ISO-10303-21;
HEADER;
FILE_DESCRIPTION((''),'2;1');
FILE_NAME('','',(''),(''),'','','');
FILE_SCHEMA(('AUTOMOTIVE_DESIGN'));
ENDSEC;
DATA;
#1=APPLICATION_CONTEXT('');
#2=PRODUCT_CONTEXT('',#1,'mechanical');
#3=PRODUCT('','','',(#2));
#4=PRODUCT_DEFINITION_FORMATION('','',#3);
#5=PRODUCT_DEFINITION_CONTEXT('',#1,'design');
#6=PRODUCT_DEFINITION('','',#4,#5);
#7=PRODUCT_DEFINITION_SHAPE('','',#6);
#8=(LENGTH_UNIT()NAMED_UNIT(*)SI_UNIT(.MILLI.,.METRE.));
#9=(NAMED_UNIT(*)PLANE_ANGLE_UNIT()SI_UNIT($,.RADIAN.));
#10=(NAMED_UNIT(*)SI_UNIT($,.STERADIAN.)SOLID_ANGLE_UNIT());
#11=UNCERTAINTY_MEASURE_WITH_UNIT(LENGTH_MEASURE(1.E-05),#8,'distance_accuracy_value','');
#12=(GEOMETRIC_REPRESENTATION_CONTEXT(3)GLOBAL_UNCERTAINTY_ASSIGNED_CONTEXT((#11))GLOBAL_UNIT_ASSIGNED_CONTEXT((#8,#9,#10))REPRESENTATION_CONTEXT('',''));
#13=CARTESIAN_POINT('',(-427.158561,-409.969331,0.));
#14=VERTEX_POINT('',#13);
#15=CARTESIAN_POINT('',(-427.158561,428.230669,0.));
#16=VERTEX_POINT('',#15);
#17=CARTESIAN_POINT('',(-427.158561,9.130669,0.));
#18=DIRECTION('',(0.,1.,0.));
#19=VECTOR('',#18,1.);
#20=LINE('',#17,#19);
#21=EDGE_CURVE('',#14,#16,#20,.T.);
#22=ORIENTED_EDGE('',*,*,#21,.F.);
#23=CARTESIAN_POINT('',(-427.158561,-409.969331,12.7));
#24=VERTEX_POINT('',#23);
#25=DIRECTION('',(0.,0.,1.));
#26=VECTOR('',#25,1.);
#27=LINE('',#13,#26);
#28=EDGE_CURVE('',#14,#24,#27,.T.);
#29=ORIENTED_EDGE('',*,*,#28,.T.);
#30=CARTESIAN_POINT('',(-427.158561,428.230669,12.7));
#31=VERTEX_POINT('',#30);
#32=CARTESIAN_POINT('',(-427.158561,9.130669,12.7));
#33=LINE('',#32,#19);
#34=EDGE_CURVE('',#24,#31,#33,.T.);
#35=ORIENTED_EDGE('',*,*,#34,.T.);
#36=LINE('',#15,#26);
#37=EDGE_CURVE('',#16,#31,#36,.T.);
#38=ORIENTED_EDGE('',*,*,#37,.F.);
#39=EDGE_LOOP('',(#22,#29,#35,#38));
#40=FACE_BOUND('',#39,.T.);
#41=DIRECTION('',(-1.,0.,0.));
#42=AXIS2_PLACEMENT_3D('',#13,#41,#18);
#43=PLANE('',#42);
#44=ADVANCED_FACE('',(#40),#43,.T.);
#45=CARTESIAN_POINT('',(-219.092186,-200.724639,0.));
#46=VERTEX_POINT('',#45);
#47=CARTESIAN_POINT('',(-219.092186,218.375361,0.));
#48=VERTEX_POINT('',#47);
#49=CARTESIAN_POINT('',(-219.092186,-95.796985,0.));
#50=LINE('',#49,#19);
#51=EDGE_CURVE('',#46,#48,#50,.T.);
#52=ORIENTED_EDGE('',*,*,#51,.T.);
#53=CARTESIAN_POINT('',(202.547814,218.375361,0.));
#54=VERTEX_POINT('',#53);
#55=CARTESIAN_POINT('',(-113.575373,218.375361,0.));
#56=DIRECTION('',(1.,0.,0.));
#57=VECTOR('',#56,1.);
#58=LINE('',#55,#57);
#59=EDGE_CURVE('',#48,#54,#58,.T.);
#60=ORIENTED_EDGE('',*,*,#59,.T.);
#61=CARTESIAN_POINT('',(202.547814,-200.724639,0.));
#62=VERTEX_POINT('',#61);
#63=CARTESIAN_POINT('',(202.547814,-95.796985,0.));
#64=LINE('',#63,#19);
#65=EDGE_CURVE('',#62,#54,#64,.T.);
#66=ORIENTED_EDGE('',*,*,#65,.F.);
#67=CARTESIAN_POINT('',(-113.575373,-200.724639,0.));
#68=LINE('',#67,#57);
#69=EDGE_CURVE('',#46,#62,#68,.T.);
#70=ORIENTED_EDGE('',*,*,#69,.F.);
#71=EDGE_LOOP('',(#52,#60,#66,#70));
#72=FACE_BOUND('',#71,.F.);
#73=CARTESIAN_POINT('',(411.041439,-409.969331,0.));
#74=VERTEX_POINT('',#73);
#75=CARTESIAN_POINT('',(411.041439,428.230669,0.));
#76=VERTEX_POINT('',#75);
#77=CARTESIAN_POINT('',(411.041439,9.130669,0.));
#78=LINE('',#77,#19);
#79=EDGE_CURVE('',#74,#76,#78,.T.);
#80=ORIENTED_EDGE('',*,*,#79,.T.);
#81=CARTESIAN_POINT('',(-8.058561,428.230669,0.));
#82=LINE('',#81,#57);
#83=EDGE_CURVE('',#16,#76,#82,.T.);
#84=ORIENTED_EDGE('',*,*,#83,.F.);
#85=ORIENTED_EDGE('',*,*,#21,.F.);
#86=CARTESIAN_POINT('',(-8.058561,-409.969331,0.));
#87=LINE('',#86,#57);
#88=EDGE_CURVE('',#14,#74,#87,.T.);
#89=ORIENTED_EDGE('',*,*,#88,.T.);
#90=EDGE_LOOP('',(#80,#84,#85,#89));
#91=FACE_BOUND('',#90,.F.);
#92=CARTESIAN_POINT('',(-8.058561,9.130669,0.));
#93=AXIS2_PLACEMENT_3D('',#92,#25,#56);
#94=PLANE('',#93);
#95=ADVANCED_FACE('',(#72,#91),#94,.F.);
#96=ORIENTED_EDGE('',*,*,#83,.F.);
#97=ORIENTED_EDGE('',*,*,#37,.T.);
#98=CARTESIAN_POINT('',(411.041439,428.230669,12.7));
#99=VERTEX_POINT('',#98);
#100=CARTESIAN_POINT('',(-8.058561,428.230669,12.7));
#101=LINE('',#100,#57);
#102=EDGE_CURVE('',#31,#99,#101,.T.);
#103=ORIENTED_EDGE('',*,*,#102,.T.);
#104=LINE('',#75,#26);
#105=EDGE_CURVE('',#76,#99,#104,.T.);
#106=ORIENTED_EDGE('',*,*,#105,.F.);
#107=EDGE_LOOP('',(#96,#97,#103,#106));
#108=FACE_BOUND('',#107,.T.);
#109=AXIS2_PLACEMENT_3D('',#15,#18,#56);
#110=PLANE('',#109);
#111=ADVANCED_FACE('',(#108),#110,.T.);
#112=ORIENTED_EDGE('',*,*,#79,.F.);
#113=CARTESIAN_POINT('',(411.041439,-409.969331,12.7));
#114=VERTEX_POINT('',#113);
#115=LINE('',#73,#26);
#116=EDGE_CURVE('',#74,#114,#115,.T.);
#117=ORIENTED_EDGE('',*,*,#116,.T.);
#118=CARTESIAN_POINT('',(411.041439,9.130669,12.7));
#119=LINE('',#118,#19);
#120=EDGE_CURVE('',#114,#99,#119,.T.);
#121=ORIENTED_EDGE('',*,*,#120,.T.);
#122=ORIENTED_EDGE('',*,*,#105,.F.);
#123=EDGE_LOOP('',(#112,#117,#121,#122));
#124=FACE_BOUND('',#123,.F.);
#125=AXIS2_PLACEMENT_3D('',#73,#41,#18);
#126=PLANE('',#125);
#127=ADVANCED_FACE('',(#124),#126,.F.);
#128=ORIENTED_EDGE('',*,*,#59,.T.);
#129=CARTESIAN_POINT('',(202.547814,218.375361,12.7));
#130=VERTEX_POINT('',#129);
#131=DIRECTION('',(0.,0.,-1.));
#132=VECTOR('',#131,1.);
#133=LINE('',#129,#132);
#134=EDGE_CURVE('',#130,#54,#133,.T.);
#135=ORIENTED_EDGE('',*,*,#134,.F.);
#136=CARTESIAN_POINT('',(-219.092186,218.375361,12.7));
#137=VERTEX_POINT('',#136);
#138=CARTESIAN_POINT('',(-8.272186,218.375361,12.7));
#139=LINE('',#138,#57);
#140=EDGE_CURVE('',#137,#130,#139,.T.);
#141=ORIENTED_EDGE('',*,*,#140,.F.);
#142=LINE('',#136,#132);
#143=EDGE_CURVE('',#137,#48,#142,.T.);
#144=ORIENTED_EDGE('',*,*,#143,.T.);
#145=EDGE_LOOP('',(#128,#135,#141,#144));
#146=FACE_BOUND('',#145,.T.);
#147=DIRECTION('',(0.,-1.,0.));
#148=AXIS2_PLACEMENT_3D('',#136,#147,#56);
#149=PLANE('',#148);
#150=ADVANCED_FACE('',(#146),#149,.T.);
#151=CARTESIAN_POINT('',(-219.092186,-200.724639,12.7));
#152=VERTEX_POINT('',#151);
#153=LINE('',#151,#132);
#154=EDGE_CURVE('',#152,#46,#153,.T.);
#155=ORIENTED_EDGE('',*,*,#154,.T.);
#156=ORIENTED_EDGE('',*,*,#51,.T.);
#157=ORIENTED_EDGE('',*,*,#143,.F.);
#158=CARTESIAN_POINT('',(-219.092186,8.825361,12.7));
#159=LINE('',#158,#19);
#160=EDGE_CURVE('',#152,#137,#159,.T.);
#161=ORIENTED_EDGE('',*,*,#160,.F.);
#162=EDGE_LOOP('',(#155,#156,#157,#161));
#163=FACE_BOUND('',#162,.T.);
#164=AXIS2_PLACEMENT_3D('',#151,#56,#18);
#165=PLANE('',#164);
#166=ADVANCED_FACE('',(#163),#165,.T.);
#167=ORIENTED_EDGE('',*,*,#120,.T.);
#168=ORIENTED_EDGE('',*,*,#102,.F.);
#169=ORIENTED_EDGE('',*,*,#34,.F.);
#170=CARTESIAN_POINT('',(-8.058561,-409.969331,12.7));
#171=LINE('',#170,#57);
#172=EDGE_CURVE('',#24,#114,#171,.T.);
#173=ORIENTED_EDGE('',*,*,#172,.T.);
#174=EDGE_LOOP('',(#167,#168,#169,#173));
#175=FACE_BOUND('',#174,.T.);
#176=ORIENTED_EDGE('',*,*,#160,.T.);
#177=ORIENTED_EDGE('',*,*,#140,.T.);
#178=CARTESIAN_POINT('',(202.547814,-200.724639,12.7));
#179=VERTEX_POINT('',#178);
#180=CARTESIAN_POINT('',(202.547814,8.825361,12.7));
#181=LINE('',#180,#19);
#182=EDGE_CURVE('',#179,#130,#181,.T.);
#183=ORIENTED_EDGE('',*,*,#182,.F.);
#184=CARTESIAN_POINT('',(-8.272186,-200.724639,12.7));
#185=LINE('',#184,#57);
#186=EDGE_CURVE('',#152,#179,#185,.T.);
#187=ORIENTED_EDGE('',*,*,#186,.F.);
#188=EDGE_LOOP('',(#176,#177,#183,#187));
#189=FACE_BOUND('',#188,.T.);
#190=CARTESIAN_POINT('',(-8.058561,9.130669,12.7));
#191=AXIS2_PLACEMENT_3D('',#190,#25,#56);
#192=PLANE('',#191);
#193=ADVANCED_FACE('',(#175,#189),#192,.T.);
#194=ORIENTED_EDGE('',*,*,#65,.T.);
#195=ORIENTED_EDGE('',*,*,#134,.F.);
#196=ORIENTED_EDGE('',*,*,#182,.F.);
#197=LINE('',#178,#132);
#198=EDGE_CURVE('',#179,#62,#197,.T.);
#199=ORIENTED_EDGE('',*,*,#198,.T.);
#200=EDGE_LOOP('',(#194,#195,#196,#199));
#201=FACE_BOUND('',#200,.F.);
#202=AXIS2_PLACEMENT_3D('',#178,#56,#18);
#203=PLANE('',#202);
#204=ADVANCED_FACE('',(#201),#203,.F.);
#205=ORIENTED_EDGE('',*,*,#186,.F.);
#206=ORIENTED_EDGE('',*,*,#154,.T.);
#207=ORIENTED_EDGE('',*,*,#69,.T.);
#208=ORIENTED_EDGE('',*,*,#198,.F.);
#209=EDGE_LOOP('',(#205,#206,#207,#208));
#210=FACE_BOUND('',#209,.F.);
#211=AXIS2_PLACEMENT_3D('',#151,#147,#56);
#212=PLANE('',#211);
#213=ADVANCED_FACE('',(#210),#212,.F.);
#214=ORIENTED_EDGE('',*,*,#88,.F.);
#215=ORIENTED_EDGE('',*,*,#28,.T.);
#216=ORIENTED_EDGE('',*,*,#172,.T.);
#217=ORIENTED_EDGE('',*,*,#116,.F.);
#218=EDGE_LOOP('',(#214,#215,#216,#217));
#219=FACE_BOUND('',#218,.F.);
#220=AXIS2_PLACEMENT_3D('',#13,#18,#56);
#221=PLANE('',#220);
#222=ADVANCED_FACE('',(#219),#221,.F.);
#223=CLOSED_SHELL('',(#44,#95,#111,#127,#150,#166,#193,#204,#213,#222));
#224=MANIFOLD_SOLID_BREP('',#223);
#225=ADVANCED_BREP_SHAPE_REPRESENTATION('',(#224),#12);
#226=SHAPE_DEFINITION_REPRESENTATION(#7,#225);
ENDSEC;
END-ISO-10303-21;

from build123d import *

# Parameters (mm, degrees)
F0_W     = 838.2
F0_H     = 838.2
F1_DEPTH = 12.7
F2_W     = 421.64
F2_H     = 419.1
F3_DEPTH = 25.4


# Not quite as in the source:
# - a length typed as a fraction of an inch, garbled in the dataset ("3 / 203.2 mm" for 3/8 in), is restored


with BuildPart() as f1:
    # F0 (on Top) → F1 (new body)
    with BuildSketch(Plane.XY):
        with Locations((-8.0585610121, 9.1306694565)):
            Rectangle(F0_W, F0_H)
    extrude(amount=F1_DEPTH)

    # F2 (on face) → F3 (cut)
    with BuildSketch(Plane.XY.offset(12.7)):
        with Locations((-8.2721859217, 8.8253611648)):
            Rectangle(F2_W, F2_H)
    extrude(amount=-F3_DEPTH, mode=Mode.SUBTRACT)


solid = f1.part
